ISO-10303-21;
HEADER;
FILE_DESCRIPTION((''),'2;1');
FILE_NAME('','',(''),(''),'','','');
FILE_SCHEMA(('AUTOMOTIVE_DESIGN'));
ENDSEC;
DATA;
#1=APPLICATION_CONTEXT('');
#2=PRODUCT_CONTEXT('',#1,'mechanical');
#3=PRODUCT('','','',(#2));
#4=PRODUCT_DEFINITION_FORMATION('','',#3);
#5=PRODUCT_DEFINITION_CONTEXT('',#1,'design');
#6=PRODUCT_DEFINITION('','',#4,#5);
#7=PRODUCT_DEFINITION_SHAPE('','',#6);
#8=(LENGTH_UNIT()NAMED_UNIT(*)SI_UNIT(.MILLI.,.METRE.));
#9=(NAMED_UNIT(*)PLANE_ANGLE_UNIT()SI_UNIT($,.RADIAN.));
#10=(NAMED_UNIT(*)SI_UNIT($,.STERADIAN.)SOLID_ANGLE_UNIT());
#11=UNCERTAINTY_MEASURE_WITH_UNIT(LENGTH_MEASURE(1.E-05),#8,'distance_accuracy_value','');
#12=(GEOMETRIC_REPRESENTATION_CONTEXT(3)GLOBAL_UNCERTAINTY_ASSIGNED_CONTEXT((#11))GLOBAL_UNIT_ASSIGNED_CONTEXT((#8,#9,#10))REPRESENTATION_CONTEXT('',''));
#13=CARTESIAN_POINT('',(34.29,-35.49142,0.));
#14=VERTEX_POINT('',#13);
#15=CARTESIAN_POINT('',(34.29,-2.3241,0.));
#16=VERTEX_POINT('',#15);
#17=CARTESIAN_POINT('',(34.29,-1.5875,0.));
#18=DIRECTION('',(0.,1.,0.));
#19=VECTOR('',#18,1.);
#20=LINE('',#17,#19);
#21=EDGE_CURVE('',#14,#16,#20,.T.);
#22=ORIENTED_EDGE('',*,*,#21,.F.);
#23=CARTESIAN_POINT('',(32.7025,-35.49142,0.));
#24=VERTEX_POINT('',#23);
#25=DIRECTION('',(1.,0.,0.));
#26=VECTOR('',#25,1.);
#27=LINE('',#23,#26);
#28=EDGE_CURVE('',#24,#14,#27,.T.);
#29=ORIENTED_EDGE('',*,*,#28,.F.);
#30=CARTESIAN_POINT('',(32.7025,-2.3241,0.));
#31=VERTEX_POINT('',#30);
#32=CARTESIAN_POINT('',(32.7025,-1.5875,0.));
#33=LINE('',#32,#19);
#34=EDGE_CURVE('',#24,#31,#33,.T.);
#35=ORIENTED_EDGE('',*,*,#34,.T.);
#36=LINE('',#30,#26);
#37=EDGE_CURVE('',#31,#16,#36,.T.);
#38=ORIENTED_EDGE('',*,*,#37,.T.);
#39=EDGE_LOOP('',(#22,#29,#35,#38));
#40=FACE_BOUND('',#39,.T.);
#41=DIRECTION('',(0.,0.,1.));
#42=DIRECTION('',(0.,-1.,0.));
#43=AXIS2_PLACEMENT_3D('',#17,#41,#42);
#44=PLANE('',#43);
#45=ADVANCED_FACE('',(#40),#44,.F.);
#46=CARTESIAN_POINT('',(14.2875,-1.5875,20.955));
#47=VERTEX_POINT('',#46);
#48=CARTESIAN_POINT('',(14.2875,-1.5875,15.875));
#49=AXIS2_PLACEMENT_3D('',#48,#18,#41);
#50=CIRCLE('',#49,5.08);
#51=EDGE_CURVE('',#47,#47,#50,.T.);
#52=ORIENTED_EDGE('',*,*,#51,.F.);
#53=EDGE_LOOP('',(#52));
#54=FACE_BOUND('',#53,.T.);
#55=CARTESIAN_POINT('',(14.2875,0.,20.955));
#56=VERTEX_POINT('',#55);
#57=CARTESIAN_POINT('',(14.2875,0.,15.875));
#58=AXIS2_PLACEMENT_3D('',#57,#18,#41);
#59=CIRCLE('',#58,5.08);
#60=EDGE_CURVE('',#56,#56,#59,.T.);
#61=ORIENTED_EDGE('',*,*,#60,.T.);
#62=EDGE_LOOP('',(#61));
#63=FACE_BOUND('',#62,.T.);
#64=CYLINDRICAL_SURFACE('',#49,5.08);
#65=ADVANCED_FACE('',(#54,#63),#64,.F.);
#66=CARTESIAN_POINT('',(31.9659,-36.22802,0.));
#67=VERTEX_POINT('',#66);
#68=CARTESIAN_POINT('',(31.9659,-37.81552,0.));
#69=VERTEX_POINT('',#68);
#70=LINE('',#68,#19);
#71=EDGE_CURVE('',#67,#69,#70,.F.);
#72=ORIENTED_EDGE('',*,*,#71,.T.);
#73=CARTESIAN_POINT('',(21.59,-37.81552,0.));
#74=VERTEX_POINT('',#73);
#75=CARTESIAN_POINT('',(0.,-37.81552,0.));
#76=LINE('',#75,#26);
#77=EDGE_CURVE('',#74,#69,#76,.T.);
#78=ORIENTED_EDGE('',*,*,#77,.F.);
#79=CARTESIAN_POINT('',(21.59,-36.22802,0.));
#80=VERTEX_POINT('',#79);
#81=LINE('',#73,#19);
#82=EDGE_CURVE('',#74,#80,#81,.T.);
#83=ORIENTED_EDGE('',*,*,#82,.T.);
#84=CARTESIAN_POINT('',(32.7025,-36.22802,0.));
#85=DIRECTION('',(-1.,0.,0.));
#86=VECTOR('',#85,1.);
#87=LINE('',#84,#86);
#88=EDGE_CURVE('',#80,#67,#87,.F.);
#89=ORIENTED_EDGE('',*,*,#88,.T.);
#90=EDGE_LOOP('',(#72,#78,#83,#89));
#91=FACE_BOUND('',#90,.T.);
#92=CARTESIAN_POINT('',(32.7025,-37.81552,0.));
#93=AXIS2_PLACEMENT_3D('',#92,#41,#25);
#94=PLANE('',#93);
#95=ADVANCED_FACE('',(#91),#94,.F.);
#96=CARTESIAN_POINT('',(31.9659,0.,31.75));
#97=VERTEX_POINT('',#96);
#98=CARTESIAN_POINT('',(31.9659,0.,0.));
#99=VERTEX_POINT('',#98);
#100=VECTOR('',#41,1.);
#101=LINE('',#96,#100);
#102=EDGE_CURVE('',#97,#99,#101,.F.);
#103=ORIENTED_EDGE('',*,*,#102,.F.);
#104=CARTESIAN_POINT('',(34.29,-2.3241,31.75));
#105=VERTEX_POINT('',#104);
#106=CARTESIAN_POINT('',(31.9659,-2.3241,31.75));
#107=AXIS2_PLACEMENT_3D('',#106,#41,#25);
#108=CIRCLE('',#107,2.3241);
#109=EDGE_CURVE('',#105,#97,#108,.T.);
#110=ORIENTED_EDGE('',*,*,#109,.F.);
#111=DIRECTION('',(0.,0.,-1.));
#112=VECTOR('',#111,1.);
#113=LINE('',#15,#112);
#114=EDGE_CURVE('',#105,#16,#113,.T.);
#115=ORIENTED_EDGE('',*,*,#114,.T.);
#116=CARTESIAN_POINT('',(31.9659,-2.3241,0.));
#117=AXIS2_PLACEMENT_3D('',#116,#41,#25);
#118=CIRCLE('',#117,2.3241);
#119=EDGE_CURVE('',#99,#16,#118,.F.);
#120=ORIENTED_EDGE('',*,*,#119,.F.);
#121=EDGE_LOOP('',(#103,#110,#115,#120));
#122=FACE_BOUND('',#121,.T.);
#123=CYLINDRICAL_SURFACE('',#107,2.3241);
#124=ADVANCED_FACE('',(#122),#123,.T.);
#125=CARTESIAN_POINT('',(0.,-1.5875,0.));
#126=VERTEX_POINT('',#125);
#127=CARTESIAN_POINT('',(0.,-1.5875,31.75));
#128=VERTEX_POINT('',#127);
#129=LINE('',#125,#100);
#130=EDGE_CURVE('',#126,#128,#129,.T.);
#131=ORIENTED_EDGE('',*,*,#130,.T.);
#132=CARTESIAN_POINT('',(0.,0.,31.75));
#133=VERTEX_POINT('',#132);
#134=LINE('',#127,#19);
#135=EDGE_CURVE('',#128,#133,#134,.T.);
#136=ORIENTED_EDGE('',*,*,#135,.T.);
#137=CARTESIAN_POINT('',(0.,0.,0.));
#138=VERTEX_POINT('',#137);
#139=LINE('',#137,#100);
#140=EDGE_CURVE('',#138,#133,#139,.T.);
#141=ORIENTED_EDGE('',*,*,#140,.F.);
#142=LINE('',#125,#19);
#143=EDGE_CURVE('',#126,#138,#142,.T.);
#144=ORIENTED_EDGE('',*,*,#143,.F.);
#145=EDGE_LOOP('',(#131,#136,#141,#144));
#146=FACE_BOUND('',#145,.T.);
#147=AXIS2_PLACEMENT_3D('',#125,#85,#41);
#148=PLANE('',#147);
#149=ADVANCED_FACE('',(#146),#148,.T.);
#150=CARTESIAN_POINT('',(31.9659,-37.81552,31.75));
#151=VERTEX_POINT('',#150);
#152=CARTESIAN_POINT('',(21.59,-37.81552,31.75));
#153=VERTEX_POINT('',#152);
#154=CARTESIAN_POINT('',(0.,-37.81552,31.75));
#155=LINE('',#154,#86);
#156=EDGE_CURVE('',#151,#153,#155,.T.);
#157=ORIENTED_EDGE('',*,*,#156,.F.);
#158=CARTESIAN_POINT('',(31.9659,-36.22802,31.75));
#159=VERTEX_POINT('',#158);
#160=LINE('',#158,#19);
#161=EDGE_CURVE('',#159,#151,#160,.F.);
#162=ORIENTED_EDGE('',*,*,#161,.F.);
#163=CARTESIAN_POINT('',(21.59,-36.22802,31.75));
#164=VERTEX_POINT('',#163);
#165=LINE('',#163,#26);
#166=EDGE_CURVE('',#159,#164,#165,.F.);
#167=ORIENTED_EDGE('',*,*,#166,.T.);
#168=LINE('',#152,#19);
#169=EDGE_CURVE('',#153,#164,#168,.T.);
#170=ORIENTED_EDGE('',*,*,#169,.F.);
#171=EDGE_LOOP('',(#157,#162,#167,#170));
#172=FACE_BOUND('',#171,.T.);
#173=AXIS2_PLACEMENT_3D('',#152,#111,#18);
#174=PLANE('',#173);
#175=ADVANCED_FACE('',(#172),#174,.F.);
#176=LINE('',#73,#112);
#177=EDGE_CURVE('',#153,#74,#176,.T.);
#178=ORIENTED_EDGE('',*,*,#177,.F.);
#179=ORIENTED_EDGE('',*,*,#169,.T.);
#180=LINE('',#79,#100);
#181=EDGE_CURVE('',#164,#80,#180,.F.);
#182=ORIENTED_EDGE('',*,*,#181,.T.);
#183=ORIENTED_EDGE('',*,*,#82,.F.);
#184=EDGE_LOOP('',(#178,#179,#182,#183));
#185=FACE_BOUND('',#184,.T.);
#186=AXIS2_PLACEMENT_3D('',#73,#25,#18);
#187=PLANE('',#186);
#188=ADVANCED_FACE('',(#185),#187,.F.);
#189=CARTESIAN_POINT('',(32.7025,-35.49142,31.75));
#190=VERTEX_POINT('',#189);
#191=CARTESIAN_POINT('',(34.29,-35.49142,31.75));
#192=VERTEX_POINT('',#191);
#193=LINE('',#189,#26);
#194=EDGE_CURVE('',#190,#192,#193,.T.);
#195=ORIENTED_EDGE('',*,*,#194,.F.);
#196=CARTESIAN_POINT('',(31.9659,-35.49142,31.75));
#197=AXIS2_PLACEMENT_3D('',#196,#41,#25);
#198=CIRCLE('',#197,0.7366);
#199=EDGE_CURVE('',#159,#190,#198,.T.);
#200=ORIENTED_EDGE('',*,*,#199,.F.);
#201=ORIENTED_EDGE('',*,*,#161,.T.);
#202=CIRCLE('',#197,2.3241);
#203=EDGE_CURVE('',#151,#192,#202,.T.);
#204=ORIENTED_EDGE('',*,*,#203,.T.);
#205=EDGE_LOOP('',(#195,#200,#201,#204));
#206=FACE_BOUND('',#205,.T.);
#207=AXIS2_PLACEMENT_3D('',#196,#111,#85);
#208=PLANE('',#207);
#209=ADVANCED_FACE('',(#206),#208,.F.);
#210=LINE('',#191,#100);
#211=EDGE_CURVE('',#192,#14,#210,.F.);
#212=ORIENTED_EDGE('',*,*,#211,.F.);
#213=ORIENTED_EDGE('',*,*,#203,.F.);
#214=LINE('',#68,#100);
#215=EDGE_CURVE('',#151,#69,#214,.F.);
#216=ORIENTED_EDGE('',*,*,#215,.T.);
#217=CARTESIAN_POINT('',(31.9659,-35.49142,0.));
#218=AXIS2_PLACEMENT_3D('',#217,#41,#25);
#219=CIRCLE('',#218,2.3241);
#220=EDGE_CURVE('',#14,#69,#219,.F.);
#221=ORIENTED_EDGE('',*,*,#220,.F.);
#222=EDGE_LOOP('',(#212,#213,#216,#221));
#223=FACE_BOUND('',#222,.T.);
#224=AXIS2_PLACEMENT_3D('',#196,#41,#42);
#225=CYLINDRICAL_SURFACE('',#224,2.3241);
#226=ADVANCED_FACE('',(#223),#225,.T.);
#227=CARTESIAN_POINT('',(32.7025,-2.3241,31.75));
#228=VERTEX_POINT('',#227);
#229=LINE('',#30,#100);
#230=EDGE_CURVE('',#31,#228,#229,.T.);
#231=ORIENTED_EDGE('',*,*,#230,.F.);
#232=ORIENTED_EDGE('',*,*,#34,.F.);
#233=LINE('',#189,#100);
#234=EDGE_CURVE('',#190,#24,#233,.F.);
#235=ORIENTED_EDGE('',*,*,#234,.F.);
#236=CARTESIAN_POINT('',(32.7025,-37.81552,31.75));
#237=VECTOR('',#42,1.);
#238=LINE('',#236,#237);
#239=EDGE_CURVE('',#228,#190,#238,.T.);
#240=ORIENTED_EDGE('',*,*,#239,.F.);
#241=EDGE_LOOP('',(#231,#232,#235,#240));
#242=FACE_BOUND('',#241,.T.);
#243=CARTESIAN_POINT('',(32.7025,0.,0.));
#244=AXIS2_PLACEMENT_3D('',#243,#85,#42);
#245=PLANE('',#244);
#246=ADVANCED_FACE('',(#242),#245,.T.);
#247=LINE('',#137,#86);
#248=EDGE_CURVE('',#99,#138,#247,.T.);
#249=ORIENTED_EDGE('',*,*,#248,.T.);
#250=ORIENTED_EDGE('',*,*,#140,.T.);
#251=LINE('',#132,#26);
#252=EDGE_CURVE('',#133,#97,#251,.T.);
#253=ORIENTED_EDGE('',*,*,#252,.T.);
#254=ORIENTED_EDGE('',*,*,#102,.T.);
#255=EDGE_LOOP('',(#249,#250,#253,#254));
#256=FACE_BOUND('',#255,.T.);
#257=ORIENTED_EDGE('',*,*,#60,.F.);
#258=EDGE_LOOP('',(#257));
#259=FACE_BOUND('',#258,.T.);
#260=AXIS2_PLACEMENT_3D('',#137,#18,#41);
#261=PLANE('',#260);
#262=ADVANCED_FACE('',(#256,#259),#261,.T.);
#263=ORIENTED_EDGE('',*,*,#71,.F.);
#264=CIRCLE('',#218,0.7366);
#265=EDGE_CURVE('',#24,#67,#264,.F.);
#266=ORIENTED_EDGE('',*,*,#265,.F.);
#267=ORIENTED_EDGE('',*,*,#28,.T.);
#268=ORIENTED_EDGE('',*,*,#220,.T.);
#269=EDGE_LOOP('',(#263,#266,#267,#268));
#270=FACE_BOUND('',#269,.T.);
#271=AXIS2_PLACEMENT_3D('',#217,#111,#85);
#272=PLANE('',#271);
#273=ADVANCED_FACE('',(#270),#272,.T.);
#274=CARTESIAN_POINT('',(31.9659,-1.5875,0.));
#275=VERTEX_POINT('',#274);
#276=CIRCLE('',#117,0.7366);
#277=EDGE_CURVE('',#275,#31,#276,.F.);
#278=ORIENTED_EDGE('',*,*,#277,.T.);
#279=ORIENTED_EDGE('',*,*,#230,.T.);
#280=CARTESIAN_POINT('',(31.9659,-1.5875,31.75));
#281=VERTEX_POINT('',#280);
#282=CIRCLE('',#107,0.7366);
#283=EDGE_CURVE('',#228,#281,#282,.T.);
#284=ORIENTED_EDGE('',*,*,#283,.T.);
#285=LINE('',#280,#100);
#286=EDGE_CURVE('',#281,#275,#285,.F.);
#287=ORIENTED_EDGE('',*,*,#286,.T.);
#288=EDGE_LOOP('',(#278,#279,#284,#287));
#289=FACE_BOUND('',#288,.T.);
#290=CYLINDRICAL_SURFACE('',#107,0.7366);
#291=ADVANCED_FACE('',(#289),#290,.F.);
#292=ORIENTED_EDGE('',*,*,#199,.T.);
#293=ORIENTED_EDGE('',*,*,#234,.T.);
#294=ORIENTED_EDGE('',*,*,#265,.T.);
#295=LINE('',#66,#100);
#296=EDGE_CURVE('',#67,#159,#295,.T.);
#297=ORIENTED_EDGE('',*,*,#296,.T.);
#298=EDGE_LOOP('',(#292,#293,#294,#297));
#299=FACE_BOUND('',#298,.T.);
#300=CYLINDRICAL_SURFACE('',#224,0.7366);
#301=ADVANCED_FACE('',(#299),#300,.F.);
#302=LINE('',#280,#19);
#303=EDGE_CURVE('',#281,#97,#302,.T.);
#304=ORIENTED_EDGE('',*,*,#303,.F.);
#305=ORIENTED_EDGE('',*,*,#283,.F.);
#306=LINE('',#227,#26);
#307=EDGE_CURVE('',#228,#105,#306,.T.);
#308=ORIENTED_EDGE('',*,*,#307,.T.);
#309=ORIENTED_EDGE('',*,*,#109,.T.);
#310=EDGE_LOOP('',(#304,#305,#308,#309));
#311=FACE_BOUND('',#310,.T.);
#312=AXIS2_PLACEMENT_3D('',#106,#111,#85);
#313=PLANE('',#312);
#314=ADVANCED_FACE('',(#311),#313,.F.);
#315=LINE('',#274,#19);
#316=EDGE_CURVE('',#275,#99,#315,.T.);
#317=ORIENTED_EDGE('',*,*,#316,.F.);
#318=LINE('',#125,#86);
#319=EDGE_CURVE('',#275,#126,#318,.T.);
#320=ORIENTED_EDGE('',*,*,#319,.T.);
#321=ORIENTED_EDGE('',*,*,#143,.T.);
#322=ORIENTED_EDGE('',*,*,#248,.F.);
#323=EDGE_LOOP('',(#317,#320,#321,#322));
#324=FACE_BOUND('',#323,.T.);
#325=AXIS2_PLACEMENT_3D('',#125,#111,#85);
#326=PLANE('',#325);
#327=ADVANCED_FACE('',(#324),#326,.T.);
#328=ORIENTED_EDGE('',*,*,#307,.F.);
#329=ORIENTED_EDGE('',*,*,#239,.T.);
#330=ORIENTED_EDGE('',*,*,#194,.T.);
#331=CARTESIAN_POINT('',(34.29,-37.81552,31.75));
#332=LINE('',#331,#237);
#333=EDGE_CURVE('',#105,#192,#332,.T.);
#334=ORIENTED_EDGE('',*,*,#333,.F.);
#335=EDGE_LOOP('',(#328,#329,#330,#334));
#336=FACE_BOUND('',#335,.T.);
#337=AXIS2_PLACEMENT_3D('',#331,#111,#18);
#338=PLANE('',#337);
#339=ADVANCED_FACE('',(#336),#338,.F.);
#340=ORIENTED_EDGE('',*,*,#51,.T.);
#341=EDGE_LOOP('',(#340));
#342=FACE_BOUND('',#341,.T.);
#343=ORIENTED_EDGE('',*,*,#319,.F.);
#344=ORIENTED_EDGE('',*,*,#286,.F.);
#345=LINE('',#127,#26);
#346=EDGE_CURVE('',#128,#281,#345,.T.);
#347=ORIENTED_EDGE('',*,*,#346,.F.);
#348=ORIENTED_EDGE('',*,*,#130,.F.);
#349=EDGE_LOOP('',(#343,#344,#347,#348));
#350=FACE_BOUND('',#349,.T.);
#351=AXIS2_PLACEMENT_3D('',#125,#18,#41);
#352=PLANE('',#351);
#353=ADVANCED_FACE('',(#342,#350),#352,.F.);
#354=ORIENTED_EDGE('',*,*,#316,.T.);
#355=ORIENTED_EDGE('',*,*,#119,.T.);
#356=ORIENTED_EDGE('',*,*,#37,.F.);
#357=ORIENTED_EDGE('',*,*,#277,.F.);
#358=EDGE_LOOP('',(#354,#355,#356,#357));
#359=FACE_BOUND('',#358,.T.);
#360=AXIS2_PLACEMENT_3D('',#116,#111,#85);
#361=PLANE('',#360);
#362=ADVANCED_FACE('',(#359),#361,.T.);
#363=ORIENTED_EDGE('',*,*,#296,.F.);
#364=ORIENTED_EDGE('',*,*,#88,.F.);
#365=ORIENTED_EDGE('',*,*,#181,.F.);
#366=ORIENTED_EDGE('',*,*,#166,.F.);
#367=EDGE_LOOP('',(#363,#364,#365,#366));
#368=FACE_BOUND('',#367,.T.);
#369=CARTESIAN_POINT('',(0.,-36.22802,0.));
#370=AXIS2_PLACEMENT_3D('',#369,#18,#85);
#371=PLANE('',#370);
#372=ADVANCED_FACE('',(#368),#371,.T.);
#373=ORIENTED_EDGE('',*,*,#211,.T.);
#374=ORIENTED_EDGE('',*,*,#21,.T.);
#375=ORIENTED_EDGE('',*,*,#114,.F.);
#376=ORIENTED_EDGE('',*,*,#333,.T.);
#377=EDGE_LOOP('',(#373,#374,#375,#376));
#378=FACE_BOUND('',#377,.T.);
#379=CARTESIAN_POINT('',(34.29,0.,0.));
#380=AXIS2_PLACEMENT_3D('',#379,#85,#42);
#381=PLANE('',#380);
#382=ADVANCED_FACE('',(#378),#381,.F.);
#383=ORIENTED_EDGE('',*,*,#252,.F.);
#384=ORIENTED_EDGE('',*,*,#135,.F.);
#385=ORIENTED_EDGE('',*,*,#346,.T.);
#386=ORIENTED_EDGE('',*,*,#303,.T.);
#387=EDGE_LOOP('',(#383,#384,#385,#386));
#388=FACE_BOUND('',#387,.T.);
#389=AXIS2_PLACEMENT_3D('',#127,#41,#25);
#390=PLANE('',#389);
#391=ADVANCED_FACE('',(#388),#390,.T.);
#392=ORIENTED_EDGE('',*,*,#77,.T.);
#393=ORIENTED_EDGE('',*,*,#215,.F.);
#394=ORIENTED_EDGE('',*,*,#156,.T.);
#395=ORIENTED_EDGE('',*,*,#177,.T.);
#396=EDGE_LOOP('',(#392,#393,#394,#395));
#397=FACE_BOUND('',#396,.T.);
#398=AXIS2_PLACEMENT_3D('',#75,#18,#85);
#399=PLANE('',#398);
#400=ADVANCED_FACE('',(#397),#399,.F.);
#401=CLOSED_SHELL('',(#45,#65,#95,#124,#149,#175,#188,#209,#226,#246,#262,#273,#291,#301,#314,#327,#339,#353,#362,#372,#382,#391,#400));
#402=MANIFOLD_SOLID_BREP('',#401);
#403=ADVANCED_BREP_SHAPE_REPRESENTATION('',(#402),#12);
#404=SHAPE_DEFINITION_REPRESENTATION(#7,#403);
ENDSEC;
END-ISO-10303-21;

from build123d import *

# Parameters (mm, degrees)
SKETCH1_W                     = 32.7025
SKETCH1_H                     = 31.75
SKETCH1_R                     = 5.08
HV_FUSE_BASE_DEPTH            = 1.5875
FUSE_TO_STACK_STRIP_W         = 7.8232
FUSE_TO_STACK_STRIP_H         = 1.5875
FUSE_TO_STACK_STRIP_CUT_DEPTH = 31.75
FUSE_TO_STACK_DEPTH           = 31.75
STACK_BASE_STRIP_W            = 7.8232
STACK_BASE_STRIP_H            = 1.5875
STACK_BASE_STRIP_CUT_DEPTH    = 31.75
STACK_BASE_DEPTH              = 31.75


# Sheet-metal steps are written as plain solids
with BuildPart() as part:
    # Sketch1 → HV Fuse Base (new body)
    with BuildSketch(Plane(origin=(0, 0, 0), x_dir=(1, 0, 0), z_dir=(0, 1, 0))):
        with Locations((16.35125, -15.875)):
            Rectangle(SKETCH1_W, SKETCH1_H)
        with Locations(Location((14.2875, -15.875, 0), (0, 0, 270))):
            Circle(SKETCH1_R, mode=Mode.SUBTRACT)
    extrude(amount=-HV_FUSE_BASE_DEPTH)

    # Fuse to Stack strip (across the edge) → Fuse to Stack strip cut (cut)
    with BuildSketch(Plane(origin=(32.7025, -1.5875, 0), x_dir=(-1, 0, 0), z_dir=(0, 0, 1))):
        with Locations((-3.175, -0.79375)):
            Rectangle(FUSE_TO_STACK_STRIP_W, FUSE_TO_STACK_STRIP_H)
    extrude(amount=FUSE_TO_STACK_STRIP_CUT_DEPTH, mode=Mode.SUBTRACT)

    # Fuse to Stack section (across the edge) → Fuse to Stack (add)
    with BuildSketch(Plane(origin=(32.7025, -1.5875, 0), x_dir=(-1, 0, 0), z_dir=(0, 0, 1))):
        with BuildLine():
            Line((-1.5875, 0.7366), (-1.5875, 36.22802))
            Line((-1.5875, 36.22802), (0, 36.22802))
            Line((0, 36.22802), (0, 0.7366))
            ThreePointArc((0, 0.7366), (0.215745145, 0.215745145), (0.7366, 0))
            Line((0.7366, 0), (0.7366, -1.5875))
            ThreePointArc((0.7366, -1.5875), (-0.90678687, -0.90678687), (-1.5875, 0.7366))
        make_face()
    extrude(amount=FUSE_TO_STACK_DEPTH)

    # Stack Base strip (across the edge) → Stack Base strip cut (cut)
    with BuildSketch(Plane(origin=(32.7025, -37.81552, 0), x_dir=(0, 1, 0), z_dir=(0, 0, 1))):
        with Locations((-1.5875, -0.79375)):
            Rectangle(STACK_BASE_STRIP_W, STACK_BASE_STRIP_H)
    extrude(amount=STACK_BASE_STRIP_CUT_DEPTH, mode=Mode.SUBTRACT)

    # Stack Base section (across the edge) → Stack Base (add)
    with BuildSketch(Plane(origin=(32.7025, -37.81552, 0), x_dir=(0, 1, 0), z_dir=(0, 0, 1))):
        with BuildLine():
            Line((0, 0.7366), (0, 11.1125))
            Line((0, 11.1125), (1.5875, 11.1125))
            Line((1.5875, 11.1125), (1.5875, 0.7366))
            ThreePointArc((1.5875, 0.7366), (1.803245145, 0.215745145), (2.3241, 0))
            Line((2.3241, 0), (2.3241, -1.5875))
            ThreePointArc((2.3241, -1.5875), (0.68071313, -0.90678687), (0, 0.7366))
        make_face()
    extrude(amount=STACK_BASE_DEPTH)


solid = part.part
